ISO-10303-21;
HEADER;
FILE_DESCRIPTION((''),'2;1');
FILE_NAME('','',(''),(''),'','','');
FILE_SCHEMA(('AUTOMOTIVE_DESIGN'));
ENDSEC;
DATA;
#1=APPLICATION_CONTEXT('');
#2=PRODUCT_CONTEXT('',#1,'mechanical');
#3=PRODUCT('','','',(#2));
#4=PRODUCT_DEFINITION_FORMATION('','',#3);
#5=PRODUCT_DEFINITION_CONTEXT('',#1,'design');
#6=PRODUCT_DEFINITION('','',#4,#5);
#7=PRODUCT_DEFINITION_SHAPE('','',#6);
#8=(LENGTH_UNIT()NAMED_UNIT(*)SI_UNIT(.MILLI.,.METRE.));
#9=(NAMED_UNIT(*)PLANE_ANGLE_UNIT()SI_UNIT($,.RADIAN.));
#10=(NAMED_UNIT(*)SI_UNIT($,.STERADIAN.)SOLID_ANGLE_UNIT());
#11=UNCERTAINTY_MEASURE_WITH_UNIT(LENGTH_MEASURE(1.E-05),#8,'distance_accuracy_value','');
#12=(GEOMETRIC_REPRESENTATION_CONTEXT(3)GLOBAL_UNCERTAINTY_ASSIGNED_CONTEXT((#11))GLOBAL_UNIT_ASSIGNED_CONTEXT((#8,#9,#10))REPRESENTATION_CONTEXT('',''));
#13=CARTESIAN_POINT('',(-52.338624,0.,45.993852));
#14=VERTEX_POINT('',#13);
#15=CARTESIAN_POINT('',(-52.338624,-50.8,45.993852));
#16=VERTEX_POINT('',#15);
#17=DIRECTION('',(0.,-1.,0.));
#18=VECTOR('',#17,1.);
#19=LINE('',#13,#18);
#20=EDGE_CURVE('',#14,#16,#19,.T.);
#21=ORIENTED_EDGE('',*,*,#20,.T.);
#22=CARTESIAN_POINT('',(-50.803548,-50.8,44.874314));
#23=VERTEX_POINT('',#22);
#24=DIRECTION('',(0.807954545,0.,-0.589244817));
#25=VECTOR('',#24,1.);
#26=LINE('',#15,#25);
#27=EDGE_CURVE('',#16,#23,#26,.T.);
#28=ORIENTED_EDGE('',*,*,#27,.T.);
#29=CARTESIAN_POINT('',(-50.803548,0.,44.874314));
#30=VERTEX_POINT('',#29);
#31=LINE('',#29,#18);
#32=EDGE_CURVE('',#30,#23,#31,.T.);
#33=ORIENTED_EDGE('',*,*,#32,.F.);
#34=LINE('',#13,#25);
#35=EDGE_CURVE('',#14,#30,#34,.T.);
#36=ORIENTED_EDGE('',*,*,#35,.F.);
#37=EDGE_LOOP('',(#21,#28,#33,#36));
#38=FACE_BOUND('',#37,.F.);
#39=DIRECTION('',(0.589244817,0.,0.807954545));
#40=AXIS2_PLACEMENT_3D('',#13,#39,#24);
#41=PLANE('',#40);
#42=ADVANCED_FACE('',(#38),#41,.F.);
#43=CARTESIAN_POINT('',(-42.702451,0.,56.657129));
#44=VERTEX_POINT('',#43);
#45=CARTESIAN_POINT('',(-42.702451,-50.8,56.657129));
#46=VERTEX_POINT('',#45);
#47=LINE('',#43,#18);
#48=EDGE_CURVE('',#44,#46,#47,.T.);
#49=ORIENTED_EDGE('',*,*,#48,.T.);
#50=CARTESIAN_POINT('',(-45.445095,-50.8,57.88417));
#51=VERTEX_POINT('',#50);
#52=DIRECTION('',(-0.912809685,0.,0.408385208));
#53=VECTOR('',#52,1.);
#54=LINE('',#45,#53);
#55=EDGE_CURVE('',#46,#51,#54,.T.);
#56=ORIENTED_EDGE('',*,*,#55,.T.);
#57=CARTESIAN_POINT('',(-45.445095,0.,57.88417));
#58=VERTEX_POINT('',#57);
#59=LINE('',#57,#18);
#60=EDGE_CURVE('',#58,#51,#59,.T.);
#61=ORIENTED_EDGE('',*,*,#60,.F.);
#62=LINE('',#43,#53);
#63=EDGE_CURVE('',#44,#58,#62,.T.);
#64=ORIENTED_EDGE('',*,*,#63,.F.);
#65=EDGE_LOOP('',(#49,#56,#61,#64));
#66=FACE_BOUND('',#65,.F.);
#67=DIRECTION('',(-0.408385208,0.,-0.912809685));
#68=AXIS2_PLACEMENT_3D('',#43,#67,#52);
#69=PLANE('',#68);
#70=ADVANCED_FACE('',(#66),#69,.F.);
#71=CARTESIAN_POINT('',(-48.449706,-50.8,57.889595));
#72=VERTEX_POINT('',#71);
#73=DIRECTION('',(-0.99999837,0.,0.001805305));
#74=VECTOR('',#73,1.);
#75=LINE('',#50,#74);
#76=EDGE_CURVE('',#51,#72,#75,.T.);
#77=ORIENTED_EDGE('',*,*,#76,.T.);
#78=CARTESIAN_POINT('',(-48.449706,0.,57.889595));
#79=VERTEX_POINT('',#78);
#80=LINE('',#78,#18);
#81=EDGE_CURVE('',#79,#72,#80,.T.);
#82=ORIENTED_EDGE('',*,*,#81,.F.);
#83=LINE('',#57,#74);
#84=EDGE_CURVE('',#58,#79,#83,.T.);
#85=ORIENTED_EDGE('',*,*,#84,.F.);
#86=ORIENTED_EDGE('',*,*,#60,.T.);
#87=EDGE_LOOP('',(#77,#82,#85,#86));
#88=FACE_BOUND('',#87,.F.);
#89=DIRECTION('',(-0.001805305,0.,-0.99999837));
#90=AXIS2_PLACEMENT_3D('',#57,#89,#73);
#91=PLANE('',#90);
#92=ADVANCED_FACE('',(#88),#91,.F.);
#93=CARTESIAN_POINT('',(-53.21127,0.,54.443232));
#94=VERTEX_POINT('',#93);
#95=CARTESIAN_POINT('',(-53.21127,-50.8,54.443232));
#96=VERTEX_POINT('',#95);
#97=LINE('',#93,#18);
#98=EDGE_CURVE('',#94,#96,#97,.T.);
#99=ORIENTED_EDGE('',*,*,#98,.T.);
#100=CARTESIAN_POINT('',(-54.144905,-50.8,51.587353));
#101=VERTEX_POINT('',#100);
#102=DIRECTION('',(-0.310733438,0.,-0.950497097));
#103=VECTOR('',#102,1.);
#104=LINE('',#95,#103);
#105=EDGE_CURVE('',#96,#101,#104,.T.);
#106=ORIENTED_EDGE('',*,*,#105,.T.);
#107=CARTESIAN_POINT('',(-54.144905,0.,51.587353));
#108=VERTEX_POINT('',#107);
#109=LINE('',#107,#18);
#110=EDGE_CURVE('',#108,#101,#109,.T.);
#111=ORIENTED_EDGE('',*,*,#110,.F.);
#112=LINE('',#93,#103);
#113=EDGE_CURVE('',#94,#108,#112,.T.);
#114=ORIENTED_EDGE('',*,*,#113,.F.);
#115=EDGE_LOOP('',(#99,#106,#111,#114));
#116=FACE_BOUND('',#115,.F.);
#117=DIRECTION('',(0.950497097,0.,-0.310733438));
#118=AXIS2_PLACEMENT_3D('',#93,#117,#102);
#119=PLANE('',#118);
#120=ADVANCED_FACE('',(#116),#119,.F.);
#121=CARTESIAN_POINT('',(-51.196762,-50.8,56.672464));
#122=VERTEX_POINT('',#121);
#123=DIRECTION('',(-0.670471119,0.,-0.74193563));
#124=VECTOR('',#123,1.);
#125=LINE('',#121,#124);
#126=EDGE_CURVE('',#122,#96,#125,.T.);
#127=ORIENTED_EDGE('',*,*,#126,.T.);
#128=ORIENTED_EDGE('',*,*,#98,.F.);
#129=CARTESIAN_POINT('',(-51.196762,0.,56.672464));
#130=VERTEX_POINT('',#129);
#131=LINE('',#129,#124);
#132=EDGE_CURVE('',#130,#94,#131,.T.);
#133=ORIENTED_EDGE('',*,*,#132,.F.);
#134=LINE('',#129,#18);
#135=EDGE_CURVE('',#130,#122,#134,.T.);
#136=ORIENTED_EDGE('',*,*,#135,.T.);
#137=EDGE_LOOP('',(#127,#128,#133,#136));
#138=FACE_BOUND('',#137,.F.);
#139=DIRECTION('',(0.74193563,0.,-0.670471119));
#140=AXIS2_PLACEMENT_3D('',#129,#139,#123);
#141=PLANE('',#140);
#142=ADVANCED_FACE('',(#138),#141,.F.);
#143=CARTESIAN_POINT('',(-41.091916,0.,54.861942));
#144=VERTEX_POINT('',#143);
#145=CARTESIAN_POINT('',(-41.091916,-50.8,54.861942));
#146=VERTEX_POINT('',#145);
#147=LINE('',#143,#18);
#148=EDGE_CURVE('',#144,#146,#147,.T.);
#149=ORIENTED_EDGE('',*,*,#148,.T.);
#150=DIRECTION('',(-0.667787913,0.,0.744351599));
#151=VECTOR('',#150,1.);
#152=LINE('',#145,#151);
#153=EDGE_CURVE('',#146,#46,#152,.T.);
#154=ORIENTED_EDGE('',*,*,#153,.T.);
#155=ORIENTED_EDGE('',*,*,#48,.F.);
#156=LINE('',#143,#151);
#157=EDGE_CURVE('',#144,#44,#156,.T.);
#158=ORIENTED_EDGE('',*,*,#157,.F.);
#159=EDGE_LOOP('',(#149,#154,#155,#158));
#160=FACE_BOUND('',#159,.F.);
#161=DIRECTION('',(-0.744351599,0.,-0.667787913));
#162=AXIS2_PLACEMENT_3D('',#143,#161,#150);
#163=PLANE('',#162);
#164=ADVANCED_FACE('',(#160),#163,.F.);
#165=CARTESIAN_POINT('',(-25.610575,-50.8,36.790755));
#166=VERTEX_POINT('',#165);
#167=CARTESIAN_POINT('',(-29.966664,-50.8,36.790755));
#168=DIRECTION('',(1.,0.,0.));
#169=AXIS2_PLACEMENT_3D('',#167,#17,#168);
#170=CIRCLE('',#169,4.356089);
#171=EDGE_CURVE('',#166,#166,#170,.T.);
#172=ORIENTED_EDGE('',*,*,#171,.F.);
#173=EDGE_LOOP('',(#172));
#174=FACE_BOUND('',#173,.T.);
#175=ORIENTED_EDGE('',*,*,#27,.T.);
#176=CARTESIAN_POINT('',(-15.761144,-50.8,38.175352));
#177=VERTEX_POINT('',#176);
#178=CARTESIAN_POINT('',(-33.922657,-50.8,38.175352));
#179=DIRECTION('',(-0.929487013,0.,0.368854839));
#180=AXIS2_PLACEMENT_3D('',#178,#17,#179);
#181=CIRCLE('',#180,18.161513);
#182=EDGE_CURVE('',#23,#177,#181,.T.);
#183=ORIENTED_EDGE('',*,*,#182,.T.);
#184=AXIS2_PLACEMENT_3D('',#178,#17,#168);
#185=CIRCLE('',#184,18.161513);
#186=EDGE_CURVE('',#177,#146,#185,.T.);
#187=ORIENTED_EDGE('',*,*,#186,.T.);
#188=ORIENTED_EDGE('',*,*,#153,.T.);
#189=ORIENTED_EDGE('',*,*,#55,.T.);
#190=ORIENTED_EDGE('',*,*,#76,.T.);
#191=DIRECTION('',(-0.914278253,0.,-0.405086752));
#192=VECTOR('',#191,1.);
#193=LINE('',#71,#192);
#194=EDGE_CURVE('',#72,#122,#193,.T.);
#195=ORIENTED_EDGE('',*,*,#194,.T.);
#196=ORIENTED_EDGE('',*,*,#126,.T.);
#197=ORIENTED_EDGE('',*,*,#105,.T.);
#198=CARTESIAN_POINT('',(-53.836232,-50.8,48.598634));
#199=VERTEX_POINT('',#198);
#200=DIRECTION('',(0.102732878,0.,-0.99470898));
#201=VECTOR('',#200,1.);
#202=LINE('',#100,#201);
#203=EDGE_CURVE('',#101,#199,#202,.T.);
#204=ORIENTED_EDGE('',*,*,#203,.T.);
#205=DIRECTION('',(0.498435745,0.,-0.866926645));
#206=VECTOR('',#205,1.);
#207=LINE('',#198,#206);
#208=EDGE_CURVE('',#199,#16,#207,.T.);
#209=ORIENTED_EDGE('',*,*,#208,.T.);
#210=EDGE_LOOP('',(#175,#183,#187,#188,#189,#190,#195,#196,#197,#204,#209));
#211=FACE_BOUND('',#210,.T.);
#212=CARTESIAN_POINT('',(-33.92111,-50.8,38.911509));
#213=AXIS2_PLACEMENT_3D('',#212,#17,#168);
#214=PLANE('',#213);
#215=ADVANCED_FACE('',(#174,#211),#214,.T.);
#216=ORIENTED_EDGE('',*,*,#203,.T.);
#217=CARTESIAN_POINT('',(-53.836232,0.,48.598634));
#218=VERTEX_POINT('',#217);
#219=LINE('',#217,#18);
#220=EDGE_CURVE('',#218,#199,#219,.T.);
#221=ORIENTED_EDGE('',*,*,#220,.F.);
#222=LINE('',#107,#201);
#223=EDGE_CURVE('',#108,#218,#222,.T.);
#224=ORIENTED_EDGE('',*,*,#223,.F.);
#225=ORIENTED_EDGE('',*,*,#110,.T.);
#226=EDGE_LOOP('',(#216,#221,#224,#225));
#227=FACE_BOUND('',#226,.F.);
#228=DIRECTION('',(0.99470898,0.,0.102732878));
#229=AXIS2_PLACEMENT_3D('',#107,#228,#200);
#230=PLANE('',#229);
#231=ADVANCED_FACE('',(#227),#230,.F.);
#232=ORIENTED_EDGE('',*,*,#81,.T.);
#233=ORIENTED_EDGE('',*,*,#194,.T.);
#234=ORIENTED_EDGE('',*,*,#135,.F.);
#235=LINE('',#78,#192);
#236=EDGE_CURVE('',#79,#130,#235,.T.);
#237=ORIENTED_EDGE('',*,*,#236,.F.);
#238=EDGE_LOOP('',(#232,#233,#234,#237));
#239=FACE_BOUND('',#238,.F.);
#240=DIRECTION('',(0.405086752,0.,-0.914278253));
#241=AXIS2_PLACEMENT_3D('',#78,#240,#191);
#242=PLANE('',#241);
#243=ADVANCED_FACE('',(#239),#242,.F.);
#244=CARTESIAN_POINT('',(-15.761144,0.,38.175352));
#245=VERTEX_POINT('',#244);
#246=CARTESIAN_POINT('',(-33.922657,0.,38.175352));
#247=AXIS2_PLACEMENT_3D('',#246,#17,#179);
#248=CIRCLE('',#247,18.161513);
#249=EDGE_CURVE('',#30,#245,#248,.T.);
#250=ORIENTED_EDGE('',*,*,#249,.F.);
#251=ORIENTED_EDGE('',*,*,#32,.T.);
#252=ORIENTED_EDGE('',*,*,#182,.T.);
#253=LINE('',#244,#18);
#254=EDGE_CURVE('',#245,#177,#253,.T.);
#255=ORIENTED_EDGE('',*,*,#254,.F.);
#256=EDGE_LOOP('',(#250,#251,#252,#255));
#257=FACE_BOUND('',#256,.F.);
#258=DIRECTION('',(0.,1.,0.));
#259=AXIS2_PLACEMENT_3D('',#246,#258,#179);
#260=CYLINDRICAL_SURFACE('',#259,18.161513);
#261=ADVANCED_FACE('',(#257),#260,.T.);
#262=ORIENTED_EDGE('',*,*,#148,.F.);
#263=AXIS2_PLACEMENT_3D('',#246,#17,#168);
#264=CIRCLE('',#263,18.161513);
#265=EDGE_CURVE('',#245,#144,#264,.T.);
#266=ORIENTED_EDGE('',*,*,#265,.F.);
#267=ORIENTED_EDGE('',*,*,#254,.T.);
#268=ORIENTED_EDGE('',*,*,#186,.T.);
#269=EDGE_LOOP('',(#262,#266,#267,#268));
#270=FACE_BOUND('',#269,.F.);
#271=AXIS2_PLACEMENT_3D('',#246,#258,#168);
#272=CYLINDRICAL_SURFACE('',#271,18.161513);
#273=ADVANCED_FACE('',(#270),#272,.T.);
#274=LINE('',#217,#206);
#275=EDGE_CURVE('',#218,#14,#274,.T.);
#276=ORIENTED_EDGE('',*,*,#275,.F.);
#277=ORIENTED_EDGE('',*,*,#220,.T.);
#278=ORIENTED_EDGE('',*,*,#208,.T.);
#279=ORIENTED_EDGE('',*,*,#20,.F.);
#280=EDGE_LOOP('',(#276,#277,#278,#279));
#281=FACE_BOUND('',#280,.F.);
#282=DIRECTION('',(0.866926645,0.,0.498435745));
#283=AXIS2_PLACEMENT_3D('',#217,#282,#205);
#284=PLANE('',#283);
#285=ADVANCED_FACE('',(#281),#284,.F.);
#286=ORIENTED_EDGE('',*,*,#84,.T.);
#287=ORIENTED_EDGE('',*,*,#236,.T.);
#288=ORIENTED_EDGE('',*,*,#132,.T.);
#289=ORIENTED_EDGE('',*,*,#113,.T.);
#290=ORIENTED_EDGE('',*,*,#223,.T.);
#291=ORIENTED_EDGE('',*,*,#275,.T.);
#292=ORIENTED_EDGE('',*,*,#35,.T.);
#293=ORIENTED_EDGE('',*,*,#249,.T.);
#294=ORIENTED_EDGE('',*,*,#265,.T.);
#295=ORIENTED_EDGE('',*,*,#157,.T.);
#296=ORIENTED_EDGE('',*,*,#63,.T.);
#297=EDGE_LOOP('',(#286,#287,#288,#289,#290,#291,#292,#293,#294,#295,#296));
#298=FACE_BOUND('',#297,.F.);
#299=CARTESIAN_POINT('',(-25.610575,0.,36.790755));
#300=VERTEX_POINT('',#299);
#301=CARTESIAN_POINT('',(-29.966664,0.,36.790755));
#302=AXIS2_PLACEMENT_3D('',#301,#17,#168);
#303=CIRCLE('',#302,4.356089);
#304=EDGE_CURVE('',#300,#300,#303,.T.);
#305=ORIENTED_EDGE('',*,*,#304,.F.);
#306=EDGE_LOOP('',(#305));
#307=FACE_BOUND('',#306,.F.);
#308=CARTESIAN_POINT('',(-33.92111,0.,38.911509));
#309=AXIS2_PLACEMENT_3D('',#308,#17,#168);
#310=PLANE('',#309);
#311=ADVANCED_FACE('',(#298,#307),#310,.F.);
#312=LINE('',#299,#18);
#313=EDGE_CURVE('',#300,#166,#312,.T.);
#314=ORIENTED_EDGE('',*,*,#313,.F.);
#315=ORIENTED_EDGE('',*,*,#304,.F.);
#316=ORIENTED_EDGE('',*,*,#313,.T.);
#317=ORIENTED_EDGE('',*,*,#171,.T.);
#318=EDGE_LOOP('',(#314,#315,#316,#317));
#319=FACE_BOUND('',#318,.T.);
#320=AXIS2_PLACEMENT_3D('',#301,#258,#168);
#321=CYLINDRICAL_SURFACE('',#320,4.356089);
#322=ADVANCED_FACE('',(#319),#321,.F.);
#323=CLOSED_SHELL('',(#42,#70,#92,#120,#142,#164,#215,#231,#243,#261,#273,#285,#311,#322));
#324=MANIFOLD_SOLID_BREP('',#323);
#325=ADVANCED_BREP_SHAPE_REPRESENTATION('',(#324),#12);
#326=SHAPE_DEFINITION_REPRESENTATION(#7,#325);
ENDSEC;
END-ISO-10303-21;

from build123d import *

# Parameters (mm, degrees)
F0_R     = 4.3560889736
F1_DEPTH = 50.8


with BuildPart() as f1:
    # F0 (on Front) → F1 (new body)
    with BuildSketch(Plane.XZ):
        with BuildLine():
            ThreePointArc((-50.8035481042, 44.8743139746), (-37.3327925125, 20.3368670349), (-15.7611440911, 38.1753519177))
            ThreePointArc((-15.7611440911, 38.1753519177), (-23.931762198, 53.3418471705), (-41.0919163358, 54.8619420575))
            Line((-41.0919163358, 54.8619420575), (-40.6960048204, 54.4206382187))
            Line((-40.6960048204, 54.4206382187), (-39.7726875247, 51.561406541))
            Line((-39.7726875247, 51.561406541), (-40.0921494975, 48.5738214521))
            Line((-40.0921494975, 48.5738214521), (-41.5991528616, 45.9744635553))
            Line((-41.5991528616, 45.9744635553), (-44.0331230447, 44.2127854453))
            Line((-44.0331230447, 44.2127854453), (-46.97320449, 43.5933972717))
            Line((-46.97320449, 43.5933972717), (-49.9110304061, 44.2233968767))
            Line((-49.9110304061, 44.2233968767), (-50.8035481042, 44.8743139746))
        make_face()
        with Locations((-29.9666635692, 36.7907546461)):
            Circle(F0_R, mode=Mode.SUBTRACT)
        with BuildLine():
            Line((-40.6960048204, 54.4206382187), (-41.0919163358, 54.8619420575))
            ThreePointArc((-41.0919163358, 54.8619420575), (-46.9434332236, 50.8363139975), (-50.8035481042, 44.8743139746))
            Line((-50.8035481042, 44.8743139746), (-49.9110304061, 44.2233968767))
            Line((-49.9110304061, 44.2233968767), (-46.97320449, 43.5933972717))
            Line((-46.97320449, 43.5933972717), (-44.0331230447, 44.2127854453))
            Line((-44.0331230447, 44.2127854453), (-41.5991528616, 45.9744635553))
            Line((-41.5991528616, 45.9744635553), (-40.0921494975, 48.5738214521))
            Line((-40.0921494975, 48.5738214521), (-39.7726875247, 51.561406541))
            Line((-39.7726875247, 51.561406541), (-40.6960048204, 54.4206382187))
        make_face()
        with BuildLine():
            ThreePointArc((-50.8035481042, 44.8743139746), (-46.9434332236, 50.8363139975), (-41.0919163358, 54.8619420575))
            Line((-41.0919163358, 54.8619420575), (-42.7024514363, 56.6571293527))
            Line((-42.7024514363, 56.6571293527), (-45.4450945244, 57.8841703083))
            Line((-45.4450945244, 57.8841703083), (-48.4497061786, 57.8895945568))
            Line((-48.4497061786, 57.8895945568), (-51.1967617479, 56.6724641964))
            Line((-51.1967617479, 56.6724641964), (-53.2112703682, 54.4432321237))
            Line((-53.2112703682, 54.4432321237), (-54.1449051977, 51.587352816))
            Line((-54.1449051977, 51.587352816), (-53.8362322927, 48.5986337504))
            Line((-53.8362322927, 48.5986337504), (-52.3386240026, 45.9938516051))
            Line((-52.3386240026, 45.9938516051), (-50.8035481042, 44.8743139746))
        make_face()
    extrude(amount=F1_DEPTH)


solid = f1.part
